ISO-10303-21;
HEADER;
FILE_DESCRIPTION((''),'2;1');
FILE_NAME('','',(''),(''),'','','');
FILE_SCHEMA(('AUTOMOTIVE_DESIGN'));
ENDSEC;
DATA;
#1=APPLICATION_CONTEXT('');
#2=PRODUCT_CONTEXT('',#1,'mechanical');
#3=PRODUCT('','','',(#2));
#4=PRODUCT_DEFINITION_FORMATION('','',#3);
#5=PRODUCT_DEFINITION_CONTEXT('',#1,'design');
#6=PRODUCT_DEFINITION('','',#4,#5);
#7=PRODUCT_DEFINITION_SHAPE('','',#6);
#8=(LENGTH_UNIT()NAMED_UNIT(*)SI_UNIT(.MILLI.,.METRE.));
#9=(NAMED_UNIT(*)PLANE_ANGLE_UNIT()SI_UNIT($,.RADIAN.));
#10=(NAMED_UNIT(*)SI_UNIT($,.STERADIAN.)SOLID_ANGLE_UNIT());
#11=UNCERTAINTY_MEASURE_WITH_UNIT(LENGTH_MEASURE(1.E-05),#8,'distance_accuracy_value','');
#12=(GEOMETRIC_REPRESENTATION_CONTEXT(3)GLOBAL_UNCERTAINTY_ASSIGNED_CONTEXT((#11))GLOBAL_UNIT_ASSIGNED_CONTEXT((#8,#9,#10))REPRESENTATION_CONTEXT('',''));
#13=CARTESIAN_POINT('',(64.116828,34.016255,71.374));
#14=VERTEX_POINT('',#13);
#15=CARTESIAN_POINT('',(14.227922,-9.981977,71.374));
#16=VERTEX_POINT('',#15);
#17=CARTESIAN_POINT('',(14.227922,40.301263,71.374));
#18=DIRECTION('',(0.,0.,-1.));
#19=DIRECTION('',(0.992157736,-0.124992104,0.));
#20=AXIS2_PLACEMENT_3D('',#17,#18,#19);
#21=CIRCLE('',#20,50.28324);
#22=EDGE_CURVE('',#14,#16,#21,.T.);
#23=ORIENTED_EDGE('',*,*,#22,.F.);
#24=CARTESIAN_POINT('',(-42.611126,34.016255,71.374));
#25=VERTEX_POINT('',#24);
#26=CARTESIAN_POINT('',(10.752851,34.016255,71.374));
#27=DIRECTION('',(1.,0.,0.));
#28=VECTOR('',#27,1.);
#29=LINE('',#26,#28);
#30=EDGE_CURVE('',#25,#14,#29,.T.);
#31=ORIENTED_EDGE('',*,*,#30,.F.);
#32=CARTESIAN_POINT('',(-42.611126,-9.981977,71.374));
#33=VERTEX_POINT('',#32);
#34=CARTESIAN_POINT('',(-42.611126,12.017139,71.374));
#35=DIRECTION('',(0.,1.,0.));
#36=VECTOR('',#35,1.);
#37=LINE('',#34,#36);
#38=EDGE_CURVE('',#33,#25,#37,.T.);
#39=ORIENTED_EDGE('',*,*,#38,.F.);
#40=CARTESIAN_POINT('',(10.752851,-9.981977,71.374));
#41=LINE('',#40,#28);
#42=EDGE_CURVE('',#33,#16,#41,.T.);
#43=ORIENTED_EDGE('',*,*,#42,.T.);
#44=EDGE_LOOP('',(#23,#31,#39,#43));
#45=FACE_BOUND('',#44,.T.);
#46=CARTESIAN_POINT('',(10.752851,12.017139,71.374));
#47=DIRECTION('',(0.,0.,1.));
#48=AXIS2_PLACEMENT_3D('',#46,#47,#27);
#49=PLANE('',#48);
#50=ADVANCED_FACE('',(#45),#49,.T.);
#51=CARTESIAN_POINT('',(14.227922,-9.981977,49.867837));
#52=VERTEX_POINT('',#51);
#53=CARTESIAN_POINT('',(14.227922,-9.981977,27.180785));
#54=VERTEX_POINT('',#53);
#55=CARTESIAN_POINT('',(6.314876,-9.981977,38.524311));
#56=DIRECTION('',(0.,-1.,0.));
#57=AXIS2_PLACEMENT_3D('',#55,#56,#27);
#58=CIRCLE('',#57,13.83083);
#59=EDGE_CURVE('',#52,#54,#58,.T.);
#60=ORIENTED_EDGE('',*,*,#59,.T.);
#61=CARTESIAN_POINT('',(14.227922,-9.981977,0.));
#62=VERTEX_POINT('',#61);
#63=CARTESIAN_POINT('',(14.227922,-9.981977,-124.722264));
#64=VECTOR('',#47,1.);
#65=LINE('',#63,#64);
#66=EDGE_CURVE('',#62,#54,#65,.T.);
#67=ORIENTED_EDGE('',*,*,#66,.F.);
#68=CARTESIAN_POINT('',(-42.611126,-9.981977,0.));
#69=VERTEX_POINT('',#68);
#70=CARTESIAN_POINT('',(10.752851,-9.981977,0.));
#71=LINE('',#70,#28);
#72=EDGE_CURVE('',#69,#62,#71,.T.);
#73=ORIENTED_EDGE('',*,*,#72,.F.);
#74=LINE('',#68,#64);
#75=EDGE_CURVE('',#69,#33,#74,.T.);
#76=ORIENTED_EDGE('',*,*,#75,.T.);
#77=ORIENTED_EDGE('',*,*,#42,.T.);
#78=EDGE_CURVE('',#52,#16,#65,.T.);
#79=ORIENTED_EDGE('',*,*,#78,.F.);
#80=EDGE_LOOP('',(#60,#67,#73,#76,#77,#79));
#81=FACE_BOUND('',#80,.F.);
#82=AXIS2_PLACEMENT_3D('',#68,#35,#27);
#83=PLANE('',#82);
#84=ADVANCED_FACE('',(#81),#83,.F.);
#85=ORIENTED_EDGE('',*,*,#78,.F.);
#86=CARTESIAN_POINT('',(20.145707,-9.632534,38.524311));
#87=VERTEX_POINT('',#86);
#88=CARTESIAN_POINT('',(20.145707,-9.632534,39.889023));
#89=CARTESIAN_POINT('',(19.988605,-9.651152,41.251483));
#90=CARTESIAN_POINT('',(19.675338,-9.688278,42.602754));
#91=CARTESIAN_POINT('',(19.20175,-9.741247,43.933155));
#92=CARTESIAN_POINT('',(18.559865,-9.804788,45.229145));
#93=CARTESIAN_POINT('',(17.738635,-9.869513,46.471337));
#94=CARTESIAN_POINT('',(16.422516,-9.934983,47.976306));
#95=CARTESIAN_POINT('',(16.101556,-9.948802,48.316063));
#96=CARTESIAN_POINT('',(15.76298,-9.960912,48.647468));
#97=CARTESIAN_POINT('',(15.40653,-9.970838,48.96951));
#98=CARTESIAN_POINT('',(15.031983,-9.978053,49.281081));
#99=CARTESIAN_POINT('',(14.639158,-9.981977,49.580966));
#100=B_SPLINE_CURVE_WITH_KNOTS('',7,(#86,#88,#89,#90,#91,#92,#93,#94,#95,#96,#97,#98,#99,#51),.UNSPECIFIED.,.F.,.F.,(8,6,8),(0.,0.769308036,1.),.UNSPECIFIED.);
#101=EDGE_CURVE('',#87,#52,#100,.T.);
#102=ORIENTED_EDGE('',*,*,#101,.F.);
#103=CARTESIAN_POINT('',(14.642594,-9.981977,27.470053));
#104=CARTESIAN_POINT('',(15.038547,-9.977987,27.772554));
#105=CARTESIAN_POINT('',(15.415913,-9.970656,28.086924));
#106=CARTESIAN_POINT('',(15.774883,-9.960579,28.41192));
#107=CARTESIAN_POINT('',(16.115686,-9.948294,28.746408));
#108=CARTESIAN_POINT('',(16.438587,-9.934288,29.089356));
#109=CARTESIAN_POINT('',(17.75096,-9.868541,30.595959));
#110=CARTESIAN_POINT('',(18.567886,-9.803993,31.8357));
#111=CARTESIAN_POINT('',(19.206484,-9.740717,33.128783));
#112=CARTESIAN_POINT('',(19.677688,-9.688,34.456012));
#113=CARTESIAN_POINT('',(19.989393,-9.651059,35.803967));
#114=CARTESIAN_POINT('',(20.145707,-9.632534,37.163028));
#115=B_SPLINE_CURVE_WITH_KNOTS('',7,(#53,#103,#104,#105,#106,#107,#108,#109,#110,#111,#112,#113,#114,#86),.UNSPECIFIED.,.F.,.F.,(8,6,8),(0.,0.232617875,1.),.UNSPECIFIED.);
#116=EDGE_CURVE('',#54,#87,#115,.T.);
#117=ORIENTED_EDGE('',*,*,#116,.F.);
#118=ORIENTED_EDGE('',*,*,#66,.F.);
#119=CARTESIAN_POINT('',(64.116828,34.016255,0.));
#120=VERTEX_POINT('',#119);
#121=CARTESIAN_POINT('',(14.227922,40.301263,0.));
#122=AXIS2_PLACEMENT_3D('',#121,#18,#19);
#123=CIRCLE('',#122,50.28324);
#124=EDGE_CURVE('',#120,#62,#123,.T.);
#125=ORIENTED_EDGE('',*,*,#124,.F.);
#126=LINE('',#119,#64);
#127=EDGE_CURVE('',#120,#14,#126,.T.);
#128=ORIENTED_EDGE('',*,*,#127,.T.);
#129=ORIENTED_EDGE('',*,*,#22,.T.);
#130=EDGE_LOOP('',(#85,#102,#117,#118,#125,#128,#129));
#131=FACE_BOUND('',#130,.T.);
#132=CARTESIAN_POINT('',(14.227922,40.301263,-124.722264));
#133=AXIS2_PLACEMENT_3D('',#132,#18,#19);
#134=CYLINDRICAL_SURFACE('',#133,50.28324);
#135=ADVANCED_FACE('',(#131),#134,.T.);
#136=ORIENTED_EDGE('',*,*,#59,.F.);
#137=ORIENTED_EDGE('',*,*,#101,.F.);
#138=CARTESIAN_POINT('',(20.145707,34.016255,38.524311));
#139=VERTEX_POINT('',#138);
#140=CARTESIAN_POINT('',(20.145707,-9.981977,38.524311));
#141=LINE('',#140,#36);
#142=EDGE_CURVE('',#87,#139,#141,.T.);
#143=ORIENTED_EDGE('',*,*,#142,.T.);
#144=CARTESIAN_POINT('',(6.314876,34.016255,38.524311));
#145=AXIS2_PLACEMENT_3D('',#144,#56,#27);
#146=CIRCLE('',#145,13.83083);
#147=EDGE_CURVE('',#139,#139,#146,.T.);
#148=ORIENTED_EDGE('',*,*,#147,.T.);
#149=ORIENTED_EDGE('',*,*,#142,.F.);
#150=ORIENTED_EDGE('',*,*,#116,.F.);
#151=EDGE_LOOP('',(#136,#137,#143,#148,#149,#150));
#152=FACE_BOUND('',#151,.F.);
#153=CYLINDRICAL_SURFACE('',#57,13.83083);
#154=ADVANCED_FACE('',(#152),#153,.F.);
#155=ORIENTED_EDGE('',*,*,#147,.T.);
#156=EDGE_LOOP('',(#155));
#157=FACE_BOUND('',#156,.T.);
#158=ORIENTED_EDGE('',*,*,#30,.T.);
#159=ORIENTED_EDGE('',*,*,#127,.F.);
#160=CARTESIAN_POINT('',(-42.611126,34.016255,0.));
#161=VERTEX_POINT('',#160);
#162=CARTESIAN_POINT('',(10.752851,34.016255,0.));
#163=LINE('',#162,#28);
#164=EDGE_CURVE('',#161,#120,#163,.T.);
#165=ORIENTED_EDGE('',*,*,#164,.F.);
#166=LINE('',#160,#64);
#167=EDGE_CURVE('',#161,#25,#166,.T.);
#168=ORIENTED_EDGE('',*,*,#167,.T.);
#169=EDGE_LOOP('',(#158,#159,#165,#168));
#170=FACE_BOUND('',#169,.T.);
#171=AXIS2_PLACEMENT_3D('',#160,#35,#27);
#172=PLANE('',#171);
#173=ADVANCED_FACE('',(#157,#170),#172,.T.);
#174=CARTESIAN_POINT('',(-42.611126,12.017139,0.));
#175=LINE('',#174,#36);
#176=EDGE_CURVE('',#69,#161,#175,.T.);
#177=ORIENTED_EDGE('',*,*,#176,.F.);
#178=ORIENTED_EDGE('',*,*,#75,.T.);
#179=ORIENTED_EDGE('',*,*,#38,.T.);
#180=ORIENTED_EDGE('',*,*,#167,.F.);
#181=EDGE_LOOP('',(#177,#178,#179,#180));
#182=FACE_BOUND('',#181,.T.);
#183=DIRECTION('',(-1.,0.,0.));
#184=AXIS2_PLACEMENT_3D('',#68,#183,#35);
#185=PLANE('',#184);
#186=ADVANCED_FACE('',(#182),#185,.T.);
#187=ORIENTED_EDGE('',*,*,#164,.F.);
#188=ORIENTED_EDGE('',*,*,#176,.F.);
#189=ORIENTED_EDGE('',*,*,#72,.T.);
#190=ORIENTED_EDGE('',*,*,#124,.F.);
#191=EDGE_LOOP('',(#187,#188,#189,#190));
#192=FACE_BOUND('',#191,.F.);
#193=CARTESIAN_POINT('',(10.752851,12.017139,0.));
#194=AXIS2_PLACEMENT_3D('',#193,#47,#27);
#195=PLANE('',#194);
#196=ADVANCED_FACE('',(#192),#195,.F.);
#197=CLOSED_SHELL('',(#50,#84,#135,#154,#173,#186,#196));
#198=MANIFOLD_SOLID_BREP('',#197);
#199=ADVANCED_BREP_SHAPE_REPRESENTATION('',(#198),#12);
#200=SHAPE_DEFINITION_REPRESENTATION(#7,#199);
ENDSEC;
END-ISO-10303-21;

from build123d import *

# Parameters (mm, degrees)
F0_W        = 106.7279540002
F0_H        = 43.9982321113
F1_DEPTH    = 71.374
F2_R        = 13.8308303795
F3_DEPTH    = 43.9982321113
F4_T1_DEPTH = 320.8185282784


# Not quite as in the source:
# - a fillet or chamfer that OpenCascade refuses, or shapes differently, is made with other operations: its cross-section is extruded or revolved along the edge and cut away or added


with BuildPart() as f1:
    # F0 (on Top) → F1 (new body)
    with BuildSketch(Plane.XY):
        with Locations((10.7528511435, 12.0171392336)):
            Rectangle(F0_W, F0_H)
    extrude(amount=F1_DEPTH)

    # F2 (on face) → F3 (cut, through all)
    with BuildSketch(Plane.XZ.offset(9.981976822)):
        with Locations((6.3148764893, 38.5243110359)):
            Circle(F2_R)
    extrude(amount=-F3_DEPTH, mode=Mode.SUBTRACT)

    # F4: fillet of radius 50.2832400771 on 1 edges, made by hand

    # F4_s2 → F4_t1 (cut)
    with BuildSketch(Plane.XY.offset(-124.7222641392)):
        with BuildLine():
            ThreePointArc((64.1168281436, 34.0162552893), (47.4873096457, 2.5889655454), (14.2279224879, -9.981976822))
            Line((14.2279224879, -9.981976822), (64.1168281436, -9.981976822))
            Line((64.1168281436, -9.981976822), (64.1168281436, 34.0162552893))
        make_face()
    extrude(amount=F4_T1_DEPTH, mode=Mode.SUBTRACT)


solid = f1.part
